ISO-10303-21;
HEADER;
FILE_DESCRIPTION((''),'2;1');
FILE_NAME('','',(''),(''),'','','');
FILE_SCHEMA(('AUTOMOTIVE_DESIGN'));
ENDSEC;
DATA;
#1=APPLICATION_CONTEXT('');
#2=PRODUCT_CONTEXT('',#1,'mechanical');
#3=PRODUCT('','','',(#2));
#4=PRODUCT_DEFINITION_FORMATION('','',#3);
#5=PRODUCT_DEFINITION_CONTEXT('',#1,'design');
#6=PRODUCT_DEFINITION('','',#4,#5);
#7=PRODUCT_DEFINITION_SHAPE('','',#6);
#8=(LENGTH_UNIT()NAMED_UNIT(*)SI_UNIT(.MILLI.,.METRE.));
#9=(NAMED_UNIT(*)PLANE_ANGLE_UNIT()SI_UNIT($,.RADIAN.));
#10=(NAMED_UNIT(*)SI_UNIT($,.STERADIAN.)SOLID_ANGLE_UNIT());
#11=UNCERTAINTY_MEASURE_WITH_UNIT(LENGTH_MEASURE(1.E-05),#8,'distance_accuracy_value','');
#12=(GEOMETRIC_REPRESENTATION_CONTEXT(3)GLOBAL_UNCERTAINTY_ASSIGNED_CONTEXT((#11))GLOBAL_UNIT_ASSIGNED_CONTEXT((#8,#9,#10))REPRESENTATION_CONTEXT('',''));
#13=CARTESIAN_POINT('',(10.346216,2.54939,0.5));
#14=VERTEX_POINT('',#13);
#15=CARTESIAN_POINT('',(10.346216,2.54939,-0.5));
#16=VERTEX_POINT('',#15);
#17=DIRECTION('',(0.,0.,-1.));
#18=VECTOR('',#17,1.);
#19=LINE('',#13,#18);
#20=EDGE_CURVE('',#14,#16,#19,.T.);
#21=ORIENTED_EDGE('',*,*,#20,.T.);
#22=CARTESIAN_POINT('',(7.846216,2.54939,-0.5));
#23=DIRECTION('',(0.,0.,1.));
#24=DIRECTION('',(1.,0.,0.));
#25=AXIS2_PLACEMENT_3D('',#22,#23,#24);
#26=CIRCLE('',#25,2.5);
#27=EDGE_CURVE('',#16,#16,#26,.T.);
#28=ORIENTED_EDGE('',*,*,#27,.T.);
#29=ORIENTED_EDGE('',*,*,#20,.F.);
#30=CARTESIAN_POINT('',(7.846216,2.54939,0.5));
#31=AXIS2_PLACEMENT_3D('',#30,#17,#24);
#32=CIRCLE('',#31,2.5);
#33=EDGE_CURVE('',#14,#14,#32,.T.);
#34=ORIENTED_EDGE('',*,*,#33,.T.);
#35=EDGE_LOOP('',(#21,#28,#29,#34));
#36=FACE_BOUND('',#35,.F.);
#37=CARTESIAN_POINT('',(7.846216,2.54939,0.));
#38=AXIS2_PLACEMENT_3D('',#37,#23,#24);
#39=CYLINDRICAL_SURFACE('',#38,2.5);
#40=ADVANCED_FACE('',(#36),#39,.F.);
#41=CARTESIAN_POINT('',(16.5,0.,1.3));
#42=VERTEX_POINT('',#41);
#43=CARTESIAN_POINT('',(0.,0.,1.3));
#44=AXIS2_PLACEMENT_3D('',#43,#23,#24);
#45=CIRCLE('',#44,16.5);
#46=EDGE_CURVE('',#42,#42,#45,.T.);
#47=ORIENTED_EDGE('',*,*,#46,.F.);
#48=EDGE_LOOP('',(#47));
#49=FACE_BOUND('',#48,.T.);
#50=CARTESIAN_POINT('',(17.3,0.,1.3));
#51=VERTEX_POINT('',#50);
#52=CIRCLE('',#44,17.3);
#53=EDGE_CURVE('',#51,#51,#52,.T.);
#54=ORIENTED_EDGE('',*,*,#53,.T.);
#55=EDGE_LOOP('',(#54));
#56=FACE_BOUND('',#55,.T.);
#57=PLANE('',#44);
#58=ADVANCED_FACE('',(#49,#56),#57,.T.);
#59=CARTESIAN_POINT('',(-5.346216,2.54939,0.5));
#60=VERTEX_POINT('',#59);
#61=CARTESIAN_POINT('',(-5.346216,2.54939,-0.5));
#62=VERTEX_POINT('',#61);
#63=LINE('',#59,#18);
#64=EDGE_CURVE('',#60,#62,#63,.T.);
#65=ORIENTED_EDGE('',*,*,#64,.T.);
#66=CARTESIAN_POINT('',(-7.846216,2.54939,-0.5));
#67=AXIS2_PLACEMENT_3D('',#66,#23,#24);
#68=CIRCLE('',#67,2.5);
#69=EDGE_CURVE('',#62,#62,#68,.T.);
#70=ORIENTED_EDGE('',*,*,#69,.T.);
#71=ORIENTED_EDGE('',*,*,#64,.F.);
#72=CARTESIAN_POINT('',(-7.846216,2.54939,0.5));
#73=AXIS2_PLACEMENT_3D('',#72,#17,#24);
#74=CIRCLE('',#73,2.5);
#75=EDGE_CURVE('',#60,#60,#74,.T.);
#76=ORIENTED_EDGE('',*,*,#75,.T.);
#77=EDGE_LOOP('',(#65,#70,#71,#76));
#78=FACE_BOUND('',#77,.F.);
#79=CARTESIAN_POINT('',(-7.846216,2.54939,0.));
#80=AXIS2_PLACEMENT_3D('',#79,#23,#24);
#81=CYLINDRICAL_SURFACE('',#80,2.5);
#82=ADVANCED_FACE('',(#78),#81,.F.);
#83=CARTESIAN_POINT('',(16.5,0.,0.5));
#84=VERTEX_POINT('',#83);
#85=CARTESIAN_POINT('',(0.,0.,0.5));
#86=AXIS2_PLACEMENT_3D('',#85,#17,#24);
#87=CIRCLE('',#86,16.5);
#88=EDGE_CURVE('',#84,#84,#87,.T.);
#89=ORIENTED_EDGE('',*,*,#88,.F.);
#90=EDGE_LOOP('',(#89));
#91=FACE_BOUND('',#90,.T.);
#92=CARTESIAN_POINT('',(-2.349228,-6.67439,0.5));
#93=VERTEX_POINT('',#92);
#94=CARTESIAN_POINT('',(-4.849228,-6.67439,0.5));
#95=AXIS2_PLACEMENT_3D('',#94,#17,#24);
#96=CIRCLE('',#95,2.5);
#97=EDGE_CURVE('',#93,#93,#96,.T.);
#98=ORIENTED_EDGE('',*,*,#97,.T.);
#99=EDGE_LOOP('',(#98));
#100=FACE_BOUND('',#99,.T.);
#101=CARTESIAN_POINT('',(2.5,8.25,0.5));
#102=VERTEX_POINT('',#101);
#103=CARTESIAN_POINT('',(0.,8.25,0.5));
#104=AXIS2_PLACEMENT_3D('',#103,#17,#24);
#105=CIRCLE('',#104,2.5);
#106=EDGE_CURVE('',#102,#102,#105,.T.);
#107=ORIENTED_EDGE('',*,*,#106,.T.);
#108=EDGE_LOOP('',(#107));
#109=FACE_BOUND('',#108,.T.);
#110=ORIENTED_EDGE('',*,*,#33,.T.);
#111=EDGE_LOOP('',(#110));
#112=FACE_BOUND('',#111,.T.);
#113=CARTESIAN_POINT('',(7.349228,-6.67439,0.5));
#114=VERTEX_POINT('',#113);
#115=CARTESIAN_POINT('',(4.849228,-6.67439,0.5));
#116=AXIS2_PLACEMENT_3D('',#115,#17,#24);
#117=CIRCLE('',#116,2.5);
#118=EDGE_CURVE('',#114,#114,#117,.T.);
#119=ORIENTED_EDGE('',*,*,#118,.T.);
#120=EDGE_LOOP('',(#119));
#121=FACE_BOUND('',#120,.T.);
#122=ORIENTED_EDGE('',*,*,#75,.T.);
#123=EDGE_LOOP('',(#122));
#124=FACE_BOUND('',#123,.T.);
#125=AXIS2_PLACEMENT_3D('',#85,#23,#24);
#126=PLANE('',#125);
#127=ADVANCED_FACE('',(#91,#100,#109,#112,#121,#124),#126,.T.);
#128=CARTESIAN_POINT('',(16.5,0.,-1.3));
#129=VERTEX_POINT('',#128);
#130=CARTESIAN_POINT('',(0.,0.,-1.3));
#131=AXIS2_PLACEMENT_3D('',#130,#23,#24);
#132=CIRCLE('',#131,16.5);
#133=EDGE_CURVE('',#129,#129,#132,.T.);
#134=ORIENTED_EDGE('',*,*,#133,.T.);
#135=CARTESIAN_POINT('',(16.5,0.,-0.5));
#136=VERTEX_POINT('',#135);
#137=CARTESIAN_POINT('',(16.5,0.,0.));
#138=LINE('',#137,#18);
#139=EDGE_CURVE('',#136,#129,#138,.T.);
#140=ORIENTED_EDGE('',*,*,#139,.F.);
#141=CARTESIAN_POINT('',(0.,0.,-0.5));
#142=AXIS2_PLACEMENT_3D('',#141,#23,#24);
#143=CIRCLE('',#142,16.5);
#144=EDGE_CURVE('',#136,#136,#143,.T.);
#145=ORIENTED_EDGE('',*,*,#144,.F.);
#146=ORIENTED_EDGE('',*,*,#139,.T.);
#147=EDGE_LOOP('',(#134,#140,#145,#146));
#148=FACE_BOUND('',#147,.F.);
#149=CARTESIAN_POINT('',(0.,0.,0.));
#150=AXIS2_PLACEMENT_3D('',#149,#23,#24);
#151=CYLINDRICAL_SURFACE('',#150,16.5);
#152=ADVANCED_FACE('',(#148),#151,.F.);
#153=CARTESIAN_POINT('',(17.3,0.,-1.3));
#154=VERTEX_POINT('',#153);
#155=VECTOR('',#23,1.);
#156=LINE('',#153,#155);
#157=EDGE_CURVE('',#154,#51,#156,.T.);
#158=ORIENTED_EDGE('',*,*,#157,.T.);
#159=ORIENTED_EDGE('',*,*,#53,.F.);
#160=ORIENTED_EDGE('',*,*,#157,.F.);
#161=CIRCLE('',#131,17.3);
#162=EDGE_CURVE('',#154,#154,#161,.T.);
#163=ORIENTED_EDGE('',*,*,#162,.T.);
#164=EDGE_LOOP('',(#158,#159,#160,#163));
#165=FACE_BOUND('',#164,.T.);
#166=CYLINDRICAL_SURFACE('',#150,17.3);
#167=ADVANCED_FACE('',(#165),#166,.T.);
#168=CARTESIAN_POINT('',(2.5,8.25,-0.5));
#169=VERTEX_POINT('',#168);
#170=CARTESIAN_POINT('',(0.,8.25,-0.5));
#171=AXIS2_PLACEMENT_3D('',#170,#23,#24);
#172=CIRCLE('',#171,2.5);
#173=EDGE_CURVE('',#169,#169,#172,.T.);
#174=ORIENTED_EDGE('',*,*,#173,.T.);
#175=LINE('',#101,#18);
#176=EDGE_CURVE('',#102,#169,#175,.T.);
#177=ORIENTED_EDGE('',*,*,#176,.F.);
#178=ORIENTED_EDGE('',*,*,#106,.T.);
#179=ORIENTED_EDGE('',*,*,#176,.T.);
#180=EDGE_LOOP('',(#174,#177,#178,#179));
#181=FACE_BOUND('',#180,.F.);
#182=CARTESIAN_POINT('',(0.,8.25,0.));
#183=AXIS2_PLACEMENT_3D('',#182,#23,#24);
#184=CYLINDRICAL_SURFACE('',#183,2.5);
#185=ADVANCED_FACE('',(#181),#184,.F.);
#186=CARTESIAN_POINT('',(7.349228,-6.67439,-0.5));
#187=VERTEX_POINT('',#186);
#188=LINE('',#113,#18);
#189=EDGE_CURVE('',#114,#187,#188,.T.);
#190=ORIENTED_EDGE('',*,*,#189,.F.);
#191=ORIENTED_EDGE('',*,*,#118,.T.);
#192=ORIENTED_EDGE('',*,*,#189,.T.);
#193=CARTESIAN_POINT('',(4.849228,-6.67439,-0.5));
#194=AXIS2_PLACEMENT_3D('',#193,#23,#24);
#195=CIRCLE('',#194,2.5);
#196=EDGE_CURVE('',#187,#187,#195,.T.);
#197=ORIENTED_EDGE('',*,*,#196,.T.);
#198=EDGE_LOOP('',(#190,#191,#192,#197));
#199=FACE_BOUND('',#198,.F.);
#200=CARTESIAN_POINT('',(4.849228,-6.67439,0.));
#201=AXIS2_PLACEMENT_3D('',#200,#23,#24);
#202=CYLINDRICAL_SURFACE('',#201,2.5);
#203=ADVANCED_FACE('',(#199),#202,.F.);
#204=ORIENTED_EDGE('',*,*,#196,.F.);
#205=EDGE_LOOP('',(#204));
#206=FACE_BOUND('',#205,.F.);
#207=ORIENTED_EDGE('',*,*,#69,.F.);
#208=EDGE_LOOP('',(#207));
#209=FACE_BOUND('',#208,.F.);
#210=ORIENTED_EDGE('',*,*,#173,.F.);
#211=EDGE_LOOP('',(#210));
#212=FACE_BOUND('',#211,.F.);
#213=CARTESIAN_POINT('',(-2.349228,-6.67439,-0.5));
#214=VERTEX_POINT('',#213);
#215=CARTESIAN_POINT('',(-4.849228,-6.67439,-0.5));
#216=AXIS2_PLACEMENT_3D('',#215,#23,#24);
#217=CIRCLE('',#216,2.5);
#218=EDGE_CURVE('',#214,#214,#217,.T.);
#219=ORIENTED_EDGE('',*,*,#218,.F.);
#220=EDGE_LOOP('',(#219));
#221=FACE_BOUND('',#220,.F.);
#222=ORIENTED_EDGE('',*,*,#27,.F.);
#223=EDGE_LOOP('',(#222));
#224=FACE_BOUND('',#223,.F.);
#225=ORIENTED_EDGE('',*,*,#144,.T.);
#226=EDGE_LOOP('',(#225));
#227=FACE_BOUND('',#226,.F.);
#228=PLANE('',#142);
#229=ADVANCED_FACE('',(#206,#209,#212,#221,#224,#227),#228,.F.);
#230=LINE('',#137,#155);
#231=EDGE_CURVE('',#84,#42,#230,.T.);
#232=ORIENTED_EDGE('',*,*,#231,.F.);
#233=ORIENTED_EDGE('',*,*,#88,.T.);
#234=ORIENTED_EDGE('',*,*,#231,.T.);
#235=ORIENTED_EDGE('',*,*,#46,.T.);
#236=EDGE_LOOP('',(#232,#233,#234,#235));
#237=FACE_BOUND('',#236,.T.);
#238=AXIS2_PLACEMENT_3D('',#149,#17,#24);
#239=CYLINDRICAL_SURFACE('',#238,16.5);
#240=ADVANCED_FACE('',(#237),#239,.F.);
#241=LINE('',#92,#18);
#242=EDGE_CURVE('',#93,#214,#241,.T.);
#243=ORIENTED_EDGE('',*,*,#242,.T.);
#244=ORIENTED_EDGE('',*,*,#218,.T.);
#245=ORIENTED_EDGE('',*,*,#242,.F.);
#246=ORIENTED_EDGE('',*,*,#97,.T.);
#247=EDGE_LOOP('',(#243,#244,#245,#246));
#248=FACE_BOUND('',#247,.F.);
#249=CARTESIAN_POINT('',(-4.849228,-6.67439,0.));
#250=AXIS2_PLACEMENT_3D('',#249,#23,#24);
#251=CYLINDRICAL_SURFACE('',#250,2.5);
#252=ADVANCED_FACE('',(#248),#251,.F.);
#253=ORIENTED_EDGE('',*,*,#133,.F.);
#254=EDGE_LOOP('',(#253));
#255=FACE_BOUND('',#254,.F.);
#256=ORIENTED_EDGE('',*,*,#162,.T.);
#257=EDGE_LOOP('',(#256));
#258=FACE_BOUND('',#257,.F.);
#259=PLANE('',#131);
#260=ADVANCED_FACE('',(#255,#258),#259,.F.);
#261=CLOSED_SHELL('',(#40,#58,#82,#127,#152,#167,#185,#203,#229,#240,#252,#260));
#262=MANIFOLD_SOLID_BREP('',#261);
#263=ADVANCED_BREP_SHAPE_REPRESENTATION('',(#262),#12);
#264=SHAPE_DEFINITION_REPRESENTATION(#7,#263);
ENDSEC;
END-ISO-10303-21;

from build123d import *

# Parameters (mm, degrees)
F0_R          = 17.3
F0_R_2        = 16.5
F1_DEPTH      = 1.3
F1_DEPTH_BACK = 1.3
F2_R          = 17.25
F3_DEPTH      = 0.5
F3_DEPTH_BACK = 0.5
F4_R          = 2.5
F5_DEPTH      = 1
F5_DEPTH_BACK = 1


with BuildPart() as f1:
    # F0 (on Top) → F1 (new body, two sides)
    with BuildSketch(Plane.XY) as f1_sk:
        Circle(F0_R)
        Circle(F0_R_2, mode=Mode.SUBTRACT)
    extrude(amount=F1_DEPTH)
    extrude(f1_sk.sketch, amount=-F1_DEPTH_BACK)

    # F2 (on Top) → F3 (join, two sides)
    with BuildSketch(Plane.XY) as f3_sk:
        Circle(F2_R)
    extrude(amount=F3_DEPTH)
    extrude(f3_sk.sketch, amount=-F3_DEPTH_BACK)

    # F4 (on Top) → F5 (cut, two sides)
    with BuildSketch(Plane.XY) as f5_sk:
        with Locations((0, 8.25)):
            Circle(F4_R)
        with Locations((-7.8462162594, 2.5493902036)):
            Circle(F4_R)
        with Locations((-4.8492283314, -6.6743902036)):
            Circle(F4_R)
        with Locations((4.8492283314, -6.6743902036)):
            Circle(F4_R)
        with Locations((7.8462162594, 2.5493902036)):
            Circle(F4_R)
    extrude(amount=-F5_DEPTH, mode=Mode.SUBTRACT)
    extrude(f5_sk.sketch, amount=F5_DEPTH_BACK, mode=Mode.SUBTRACT)


solid = f1.part
